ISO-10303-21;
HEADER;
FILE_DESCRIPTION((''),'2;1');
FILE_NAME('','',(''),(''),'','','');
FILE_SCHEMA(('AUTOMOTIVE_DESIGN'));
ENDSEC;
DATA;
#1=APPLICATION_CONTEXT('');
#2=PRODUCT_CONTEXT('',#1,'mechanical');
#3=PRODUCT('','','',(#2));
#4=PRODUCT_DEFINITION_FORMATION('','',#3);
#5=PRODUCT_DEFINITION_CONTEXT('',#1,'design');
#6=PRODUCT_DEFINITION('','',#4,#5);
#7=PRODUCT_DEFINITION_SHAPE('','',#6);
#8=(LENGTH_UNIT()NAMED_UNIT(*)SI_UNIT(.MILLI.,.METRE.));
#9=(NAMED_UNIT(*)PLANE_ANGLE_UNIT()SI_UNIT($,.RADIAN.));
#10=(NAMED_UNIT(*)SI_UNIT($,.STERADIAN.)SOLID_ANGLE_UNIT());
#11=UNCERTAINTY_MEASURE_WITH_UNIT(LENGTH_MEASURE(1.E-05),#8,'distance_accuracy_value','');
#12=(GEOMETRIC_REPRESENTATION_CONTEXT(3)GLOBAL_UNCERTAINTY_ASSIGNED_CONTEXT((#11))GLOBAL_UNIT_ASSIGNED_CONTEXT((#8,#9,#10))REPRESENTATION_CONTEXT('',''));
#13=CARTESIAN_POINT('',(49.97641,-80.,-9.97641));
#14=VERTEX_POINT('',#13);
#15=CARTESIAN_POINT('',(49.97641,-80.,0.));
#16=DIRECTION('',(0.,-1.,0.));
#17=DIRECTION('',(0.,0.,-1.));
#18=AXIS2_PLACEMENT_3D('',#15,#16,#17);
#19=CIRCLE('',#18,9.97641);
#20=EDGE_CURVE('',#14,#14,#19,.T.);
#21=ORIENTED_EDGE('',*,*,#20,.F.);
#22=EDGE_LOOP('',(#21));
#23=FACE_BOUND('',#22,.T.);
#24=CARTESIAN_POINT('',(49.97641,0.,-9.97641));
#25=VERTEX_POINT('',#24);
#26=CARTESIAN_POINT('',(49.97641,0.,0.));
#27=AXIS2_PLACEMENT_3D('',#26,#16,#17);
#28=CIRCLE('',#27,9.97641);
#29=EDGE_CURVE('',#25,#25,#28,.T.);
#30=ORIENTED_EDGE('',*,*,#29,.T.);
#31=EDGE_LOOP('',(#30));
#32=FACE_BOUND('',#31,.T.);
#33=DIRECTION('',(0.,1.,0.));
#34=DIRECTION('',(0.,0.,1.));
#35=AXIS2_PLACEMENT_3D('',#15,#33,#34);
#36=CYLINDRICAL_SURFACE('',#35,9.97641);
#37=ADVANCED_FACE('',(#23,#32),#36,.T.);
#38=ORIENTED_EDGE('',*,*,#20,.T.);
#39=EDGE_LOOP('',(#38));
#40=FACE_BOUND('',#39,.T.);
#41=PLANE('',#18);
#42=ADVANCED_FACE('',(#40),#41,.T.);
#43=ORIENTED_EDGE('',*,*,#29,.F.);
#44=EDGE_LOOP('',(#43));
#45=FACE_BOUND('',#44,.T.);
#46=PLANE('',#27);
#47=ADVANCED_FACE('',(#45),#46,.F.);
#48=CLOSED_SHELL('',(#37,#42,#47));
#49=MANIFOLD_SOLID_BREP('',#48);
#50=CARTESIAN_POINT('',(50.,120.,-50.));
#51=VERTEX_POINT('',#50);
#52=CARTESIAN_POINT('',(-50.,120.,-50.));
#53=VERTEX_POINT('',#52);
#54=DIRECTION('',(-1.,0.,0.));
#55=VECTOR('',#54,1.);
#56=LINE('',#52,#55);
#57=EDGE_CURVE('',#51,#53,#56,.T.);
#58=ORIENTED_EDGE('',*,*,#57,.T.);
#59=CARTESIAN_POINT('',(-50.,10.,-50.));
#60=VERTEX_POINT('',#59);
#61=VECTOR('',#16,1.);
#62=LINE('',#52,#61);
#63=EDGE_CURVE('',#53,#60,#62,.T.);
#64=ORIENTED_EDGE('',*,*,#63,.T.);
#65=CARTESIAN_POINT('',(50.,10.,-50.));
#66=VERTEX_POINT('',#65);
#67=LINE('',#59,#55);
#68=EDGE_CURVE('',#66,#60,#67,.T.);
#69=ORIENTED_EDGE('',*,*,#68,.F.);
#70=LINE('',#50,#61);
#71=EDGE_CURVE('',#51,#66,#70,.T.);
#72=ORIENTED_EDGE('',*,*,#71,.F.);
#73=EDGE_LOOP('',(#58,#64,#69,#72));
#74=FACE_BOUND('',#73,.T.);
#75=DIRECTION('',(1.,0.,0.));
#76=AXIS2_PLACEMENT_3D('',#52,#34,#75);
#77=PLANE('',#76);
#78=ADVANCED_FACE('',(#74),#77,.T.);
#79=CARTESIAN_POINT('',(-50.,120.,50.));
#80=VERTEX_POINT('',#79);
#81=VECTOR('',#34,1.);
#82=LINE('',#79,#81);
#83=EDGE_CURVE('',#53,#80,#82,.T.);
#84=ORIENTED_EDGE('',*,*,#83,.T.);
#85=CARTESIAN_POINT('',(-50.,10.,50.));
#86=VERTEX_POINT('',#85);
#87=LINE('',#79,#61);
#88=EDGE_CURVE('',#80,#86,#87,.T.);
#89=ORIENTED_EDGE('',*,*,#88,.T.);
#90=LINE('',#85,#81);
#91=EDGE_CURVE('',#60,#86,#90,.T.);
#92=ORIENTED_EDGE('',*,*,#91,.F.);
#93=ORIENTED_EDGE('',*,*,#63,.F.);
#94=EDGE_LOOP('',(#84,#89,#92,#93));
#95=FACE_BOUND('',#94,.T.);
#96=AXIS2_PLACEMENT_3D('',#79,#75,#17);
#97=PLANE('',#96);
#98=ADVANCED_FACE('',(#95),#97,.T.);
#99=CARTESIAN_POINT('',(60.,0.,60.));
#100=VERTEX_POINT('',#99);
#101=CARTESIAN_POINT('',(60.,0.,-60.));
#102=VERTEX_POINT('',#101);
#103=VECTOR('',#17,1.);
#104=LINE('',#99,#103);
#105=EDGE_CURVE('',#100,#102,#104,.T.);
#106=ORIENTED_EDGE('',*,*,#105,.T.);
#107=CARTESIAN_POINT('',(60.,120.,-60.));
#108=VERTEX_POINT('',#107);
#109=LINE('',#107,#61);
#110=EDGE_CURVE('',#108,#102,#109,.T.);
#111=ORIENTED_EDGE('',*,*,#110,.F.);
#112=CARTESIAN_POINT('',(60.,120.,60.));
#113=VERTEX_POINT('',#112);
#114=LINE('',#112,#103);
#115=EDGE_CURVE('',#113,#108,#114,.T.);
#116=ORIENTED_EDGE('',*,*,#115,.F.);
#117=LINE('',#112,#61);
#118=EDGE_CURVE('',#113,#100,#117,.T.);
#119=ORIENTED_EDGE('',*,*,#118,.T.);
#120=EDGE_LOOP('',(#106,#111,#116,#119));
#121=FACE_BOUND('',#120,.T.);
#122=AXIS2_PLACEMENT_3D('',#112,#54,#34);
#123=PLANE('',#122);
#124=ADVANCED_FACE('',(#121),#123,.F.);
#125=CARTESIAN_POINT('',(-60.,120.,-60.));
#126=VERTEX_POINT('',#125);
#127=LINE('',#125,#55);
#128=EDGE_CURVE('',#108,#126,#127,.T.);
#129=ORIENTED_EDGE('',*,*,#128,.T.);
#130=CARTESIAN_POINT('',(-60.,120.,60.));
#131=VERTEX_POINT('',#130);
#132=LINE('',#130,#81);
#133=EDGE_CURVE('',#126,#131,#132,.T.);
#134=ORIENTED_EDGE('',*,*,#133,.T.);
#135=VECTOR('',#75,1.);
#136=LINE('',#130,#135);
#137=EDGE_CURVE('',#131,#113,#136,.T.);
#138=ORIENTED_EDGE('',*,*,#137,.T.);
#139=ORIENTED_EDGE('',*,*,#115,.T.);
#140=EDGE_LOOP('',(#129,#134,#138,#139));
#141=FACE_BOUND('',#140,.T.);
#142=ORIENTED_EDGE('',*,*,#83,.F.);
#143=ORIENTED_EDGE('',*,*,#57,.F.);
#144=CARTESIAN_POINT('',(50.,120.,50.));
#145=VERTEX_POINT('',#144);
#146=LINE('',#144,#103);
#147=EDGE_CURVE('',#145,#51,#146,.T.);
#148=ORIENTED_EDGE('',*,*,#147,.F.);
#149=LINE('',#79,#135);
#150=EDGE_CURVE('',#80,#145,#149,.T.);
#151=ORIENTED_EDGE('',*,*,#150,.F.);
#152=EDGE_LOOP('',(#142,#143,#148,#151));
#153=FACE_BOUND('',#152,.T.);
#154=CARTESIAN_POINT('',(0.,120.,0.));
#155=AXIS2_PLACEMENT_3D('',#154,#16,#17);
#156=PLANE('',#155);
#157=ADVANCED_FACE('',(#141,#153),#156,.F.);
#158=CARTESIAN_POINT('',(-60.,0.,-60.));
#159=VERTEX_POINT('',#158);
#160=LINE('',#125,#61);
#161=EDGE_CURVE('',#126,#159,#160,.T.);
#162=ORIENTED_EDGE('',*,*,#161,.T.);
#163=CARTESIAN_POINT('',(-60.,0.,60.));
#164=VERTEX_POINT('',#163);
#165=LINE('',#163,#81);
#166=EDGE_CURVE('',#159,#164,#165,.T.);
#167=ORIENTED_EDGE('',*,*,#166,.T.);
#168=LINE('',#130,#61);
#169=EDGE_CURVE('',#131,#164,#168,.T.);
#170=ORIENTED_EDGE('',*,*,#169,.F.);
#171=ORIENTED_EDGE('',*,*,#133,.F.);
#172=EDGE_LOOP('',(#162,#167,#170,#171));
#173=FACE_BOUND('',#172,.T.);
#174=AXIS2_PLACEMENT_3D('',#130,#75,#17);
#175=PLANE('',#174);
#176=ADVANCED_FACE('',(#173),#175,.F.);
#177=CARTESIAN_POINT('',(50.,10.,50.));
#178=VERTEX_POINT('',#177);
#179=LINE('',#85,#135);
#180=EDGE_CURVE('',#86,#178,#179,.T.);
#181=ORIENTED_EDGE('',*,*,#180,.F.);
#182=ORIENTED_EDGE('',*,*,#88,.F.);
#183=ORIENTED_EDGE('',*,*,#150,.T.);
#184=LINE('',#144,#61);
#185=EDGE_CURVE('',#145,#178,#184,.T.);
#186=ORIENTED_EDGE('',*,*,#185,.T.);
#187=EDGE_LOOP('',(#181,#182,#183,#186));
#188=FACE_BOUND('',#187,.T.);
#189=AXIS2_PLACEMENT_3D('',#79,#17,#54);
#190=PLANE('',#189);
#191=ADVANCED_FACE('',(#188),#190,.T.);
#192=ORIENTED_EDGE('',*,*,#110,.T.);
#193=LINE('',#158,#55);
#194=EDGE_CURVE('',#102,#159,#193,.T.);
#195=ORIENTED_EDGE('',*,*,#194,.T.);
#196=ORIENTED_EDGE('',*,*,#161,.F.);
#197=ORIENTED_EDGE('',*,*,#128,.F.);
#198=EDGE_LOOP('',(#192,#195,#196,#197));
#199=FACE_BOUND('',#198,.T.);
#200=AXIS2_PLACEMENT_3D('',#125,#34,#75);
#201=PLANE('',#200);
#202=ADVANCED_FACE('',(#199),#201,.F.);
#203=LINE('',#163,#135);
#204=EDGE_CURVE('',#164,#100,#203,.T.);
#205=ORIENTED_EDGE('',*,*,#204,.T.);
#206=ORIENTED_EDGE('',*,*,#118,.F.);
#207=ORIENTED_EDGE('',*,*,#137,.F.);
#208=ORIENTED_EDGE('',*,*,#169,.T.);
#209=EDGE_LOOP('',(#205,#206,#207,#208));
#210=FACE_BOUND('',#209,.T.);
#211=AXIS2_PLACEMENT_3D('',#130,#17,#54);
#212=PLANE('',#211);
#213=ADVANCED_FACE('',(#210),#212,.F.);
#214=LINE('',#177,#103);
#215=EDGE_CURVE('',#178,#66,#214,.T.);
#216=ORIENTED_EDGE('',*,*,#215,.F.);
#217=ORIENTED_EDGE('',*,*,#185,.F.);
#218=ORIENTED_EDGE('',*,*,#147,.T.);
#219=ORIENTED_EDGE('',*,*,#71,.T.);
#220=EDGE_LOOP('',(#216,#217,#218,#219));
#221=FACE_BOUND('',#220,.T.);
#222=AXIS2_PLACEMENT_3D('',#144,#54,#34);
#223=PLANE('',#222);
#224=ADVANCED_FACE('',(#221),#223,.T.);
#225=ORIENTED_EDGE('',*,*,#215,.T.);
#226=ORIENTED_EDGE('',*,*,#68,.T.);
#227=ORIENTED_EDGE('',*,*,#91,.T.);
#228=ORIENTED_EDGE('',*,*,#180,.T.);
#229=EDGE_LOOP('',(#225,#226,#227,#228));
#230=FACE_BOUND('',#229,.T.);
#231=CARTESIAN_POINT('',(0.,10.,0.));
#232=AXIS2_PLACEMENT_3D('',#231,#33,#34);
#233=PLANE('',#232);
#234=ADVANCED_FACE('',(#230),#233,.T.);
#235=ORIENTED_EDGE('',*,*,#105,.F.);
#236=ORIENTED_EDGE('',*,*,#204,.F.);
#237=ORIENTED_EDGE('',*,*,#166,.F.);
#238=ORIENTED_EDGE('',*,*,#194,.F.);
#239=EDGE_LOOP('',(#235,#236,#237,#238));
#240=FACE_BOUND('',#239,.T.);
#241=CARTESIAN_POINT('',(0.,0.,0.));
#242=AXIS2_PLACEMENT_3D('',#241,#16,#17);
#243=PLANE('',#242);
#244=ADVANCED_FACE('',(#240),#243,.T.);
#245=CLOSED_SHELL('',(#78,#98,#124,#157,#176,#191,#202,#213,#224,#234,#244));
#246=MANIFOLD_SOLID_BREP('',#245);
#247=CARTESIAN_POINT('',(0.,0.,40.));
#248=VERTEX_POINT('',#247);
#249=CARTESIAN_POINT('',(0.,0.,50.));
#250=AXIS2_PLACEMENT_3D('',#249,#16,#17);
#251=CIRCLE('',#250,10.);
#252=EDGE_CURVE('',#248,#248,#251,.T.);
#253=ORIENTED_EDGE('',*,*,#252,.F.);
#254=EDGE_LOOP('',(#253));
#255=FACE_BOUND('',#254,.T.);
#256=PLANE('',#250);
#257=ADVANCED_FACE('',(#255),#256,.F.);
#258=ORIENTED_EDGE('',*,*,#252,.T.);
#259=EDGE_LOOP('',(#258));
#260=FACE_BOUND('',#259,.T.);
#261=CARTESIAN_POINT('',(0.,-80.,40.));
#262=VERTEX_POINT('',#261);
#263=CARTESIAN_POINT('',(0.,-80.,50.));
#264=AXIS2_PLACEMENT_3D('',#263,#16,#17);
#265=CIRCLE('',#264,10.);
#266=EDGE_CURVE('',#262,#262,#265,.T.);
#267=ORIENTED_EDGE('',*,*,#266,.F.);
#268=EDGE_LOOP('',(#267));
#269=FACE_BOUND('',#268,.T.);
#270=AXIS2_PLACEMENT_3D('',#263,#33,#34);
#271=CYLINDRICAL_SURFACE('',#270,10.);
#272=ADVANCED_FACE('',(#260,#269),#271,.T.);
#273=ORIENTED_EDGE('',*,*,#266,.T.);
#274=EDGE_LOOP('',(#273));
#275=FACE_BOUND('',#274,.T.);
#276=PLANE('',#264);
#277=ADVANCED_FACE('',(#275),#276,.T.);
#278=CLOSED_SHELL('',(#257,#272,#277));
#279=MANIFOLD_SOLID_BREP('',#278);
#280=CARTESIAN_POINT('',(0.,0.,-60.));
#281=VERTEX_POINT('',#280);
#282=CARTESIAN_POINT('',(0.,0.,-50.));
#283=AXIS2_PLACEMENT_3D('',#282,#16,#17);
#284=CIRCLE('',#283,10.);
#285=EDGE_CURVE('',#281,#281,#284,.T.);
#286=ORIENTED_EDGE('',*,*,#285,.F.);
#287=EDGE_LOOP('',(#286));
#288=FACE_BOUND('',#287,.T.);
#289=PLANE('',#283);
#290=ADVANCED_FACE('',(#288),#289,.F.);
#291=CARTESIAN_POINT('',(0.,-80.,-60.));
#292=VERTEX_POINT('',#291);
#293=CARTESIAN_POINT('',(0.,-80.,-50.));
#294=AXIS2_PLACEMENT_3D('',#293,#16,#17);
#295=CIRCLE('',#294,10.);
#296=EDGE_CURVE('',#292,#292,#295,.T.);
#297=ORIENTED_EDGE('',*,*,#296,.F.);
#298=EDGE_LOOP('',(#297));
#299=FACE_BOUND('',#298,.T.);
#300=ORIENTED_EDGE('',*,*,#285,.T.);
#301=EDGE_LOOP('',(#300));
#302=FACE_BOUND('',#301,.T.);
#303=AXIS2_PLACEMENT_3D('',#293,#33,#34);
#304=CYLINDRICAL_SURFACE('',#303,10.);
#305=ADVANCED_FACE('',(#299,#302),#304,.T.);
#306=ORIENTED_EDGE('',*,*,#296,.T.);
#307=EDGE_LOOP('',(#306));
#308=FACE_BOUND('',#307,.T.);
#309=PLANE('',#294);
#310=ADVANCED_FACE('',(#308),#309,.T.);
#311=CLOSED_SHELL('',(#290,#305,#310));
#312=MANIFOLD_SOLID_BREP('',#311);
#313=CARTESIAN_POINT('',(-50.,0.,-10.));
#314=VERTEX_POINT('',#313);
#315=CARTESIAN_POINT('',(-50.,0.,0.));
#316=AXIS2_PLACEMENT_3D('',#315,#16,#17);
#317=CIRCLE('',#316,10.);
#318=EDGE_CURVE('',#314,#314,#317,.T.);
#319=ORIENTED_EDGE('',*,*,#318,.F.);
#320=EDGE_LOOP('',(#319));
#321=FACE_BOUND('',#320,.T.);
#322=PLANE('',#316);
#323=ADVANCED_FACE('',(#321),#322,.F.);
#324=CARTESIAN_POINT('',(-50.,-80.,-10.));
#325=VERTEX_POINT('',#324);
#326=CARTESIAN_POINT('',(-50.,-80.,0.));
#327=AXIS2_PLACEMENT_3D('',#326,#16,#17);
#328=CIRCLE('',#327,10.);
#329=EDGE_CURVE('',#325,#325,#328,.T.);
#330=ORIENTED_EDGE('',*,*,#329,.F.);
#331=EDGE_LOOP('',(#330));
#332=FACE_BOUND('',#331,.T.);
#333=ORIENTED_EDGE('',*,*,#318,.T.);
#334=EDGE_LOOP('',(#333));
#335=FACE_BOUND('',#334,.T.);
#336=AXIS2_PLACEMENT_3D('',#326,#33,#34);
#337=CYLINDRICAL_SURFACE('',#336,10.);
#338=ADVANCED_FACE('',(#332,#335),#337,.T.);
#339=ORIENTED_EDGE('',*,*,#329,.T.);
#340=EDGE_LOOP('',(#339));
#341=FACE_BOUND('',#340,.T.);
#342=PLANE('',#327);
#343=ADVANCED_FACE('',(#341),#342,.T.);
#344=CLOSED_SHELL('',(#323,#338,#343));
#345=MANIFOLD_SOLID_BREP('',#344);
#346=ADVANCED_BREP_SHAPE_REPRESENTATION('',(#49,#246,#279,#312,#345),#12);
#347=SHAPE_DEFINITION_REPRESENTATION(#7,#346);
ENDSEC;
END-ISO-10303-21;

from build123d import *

# Parameters (mm, degrees)
SKETCH2_W             = 120
SKETCH2_H             = 120
SKETCH2_W_2           = 100
SKETCH2_H_2           = 100
BOSS_EXTRUDE1_DEPTH   = 120
SKETCH3_W             = 120
SKETCH3_H             = 120
BOSS_EXTRUDE2_DEPTH   = 10
SKETCH4_W             = 80
SKETCH4_H             = 80
BOSS_EXTRUDE3_DEPTH   = 30
SKETCH5_R             = 25
CUT_EXTRUDE2_DEPTH    = 25
FILLET1_R             = 25
SKETCH7_R             = 10
BOSS_EXTRUDE5_DEPTH   = 80
SKETCH7_R_2           = 9.976410379
BOSS_EXTRUDE5_2_DEPTH = 80
BOSS_EXTRUDE5_3_DEPTH = 80
BOSS_EXTRUDE5_4_DEPTH = 80
SKETCH8_W             = 80
SKETCH8_H             = 80
CUT_EXTRUDE4_DEPTH    = 30


with BuildPart() as part:
    # Sketch2 → Boss-Extrude1 (new body)
    with BuildSketch(Plane(origin=(0, 0, 0), x_dir=(1, 0, 0), z_dir=(0, 1, 0))):
        Rectangle(SKETCH2_W, SKETCH2_H)
        Rectangle(SKETCH2_W_2, SKETCH2_H_2, mode=Mode.SUBTRACT)
    extrude(amount=BOSS_EXTRUDE1_DEPTH)

    # Sketch3 → Boss-Extrude2 (add)
    with BuildSketch(Plane.XZ):
        Rectangle(SKETCH3_W, SKETCH3_H)
    extrude(amount=-BOSS_EXTRUDE2_DEPTH)

    # Sketch4 → Boss-Extrude3 (add)
    with BuildSketch(Plane.XZ):
        Rectangle(SKETCH4_W, SKETCH4_H)
    extrude(amount=BOSS_EXTRUDE3_DEPTH)

    # Sketch5 → Cut-Extrude2 (cut)
    with BuildSketch(Plane(origin=(0, -30, 0), x_dir=(-1, 0, 0), z_dir=(0, -1, 0))):
        with Locations(Location((0, 0, 0), (0, 0, 90))):
            Circle(SKETCH5_R)
    extrude(amount=-CUT_EXTRUDE2_DEPTH, mode=Mode.SUBTRACT)

    # Fillet1
    fillet1_edges = [part.edges().sort_by_distance(p)[0] for p in [
        (0, -5, 25),
    ]]
    fillet(fillet1_edges, radius=FILLET1_R - 0.0001)  # a hair under: the kernel refuses the full size

    # Sketch8 → Cut-Extrude4 (cut)
    with BuildSketch(Plane.XZ.offset(30)):
        Rectangle(SKETCH8_W, SKETCH8_H)
    extrude(amount=-CUT_EXTRUDE4_DEPTH, mode=Mode.SUBTRACT)


with BuildPart() as body_2:
    # Sketch7 → Boss-Extrude5 (new body)
    with BuildSketch(Plane.XZ):
        with Locations(Location((0, -50, 0), (0, 0, 270))):
            Circle(SKETCH7_R)
    extrude(amount=BOSS_EXTRUDE5_DEPTH)


with BuildPart() as body_3:
    # Sketch7 → Boss-Extrude5 2 (new body)
    with BuildSketch(Plane.XZ):
        with Locations(Location((49.976410379, 0, 0), (0, 0, 270))):
            Circle(SKETCH7_R_2)
    extrude(amount=BOSS_EXTRUDE5_2_DEPTH)


with BuildPart() as body_4:
    # Sketch7 → Boss-Extrude5 3 (new body)
    with BuildSketch(Plane.XZ):
        with Locations(Location((0, 50, 0), (0, 0, 270))):
            Circle(SKETCH7_R)
    extrude(amount=BOSS_EXTRUDE5_3_DEPTH)


with BuildPart() as body_5:
    # Sketch7 → Boss-Extrude5 4 (new body)
    with BuildSketch(Plane.XZ):
        with Locations(Location((-50, 0, 0), (0, 0, 270))):
            Circle(SKETCH7_R)
    extrude(amount=BOSS_EXTRUDE5_4_DEPTH)


solid = Compound([part.part, body_2.part, body_3.part, body_4.part, body_5.part])
